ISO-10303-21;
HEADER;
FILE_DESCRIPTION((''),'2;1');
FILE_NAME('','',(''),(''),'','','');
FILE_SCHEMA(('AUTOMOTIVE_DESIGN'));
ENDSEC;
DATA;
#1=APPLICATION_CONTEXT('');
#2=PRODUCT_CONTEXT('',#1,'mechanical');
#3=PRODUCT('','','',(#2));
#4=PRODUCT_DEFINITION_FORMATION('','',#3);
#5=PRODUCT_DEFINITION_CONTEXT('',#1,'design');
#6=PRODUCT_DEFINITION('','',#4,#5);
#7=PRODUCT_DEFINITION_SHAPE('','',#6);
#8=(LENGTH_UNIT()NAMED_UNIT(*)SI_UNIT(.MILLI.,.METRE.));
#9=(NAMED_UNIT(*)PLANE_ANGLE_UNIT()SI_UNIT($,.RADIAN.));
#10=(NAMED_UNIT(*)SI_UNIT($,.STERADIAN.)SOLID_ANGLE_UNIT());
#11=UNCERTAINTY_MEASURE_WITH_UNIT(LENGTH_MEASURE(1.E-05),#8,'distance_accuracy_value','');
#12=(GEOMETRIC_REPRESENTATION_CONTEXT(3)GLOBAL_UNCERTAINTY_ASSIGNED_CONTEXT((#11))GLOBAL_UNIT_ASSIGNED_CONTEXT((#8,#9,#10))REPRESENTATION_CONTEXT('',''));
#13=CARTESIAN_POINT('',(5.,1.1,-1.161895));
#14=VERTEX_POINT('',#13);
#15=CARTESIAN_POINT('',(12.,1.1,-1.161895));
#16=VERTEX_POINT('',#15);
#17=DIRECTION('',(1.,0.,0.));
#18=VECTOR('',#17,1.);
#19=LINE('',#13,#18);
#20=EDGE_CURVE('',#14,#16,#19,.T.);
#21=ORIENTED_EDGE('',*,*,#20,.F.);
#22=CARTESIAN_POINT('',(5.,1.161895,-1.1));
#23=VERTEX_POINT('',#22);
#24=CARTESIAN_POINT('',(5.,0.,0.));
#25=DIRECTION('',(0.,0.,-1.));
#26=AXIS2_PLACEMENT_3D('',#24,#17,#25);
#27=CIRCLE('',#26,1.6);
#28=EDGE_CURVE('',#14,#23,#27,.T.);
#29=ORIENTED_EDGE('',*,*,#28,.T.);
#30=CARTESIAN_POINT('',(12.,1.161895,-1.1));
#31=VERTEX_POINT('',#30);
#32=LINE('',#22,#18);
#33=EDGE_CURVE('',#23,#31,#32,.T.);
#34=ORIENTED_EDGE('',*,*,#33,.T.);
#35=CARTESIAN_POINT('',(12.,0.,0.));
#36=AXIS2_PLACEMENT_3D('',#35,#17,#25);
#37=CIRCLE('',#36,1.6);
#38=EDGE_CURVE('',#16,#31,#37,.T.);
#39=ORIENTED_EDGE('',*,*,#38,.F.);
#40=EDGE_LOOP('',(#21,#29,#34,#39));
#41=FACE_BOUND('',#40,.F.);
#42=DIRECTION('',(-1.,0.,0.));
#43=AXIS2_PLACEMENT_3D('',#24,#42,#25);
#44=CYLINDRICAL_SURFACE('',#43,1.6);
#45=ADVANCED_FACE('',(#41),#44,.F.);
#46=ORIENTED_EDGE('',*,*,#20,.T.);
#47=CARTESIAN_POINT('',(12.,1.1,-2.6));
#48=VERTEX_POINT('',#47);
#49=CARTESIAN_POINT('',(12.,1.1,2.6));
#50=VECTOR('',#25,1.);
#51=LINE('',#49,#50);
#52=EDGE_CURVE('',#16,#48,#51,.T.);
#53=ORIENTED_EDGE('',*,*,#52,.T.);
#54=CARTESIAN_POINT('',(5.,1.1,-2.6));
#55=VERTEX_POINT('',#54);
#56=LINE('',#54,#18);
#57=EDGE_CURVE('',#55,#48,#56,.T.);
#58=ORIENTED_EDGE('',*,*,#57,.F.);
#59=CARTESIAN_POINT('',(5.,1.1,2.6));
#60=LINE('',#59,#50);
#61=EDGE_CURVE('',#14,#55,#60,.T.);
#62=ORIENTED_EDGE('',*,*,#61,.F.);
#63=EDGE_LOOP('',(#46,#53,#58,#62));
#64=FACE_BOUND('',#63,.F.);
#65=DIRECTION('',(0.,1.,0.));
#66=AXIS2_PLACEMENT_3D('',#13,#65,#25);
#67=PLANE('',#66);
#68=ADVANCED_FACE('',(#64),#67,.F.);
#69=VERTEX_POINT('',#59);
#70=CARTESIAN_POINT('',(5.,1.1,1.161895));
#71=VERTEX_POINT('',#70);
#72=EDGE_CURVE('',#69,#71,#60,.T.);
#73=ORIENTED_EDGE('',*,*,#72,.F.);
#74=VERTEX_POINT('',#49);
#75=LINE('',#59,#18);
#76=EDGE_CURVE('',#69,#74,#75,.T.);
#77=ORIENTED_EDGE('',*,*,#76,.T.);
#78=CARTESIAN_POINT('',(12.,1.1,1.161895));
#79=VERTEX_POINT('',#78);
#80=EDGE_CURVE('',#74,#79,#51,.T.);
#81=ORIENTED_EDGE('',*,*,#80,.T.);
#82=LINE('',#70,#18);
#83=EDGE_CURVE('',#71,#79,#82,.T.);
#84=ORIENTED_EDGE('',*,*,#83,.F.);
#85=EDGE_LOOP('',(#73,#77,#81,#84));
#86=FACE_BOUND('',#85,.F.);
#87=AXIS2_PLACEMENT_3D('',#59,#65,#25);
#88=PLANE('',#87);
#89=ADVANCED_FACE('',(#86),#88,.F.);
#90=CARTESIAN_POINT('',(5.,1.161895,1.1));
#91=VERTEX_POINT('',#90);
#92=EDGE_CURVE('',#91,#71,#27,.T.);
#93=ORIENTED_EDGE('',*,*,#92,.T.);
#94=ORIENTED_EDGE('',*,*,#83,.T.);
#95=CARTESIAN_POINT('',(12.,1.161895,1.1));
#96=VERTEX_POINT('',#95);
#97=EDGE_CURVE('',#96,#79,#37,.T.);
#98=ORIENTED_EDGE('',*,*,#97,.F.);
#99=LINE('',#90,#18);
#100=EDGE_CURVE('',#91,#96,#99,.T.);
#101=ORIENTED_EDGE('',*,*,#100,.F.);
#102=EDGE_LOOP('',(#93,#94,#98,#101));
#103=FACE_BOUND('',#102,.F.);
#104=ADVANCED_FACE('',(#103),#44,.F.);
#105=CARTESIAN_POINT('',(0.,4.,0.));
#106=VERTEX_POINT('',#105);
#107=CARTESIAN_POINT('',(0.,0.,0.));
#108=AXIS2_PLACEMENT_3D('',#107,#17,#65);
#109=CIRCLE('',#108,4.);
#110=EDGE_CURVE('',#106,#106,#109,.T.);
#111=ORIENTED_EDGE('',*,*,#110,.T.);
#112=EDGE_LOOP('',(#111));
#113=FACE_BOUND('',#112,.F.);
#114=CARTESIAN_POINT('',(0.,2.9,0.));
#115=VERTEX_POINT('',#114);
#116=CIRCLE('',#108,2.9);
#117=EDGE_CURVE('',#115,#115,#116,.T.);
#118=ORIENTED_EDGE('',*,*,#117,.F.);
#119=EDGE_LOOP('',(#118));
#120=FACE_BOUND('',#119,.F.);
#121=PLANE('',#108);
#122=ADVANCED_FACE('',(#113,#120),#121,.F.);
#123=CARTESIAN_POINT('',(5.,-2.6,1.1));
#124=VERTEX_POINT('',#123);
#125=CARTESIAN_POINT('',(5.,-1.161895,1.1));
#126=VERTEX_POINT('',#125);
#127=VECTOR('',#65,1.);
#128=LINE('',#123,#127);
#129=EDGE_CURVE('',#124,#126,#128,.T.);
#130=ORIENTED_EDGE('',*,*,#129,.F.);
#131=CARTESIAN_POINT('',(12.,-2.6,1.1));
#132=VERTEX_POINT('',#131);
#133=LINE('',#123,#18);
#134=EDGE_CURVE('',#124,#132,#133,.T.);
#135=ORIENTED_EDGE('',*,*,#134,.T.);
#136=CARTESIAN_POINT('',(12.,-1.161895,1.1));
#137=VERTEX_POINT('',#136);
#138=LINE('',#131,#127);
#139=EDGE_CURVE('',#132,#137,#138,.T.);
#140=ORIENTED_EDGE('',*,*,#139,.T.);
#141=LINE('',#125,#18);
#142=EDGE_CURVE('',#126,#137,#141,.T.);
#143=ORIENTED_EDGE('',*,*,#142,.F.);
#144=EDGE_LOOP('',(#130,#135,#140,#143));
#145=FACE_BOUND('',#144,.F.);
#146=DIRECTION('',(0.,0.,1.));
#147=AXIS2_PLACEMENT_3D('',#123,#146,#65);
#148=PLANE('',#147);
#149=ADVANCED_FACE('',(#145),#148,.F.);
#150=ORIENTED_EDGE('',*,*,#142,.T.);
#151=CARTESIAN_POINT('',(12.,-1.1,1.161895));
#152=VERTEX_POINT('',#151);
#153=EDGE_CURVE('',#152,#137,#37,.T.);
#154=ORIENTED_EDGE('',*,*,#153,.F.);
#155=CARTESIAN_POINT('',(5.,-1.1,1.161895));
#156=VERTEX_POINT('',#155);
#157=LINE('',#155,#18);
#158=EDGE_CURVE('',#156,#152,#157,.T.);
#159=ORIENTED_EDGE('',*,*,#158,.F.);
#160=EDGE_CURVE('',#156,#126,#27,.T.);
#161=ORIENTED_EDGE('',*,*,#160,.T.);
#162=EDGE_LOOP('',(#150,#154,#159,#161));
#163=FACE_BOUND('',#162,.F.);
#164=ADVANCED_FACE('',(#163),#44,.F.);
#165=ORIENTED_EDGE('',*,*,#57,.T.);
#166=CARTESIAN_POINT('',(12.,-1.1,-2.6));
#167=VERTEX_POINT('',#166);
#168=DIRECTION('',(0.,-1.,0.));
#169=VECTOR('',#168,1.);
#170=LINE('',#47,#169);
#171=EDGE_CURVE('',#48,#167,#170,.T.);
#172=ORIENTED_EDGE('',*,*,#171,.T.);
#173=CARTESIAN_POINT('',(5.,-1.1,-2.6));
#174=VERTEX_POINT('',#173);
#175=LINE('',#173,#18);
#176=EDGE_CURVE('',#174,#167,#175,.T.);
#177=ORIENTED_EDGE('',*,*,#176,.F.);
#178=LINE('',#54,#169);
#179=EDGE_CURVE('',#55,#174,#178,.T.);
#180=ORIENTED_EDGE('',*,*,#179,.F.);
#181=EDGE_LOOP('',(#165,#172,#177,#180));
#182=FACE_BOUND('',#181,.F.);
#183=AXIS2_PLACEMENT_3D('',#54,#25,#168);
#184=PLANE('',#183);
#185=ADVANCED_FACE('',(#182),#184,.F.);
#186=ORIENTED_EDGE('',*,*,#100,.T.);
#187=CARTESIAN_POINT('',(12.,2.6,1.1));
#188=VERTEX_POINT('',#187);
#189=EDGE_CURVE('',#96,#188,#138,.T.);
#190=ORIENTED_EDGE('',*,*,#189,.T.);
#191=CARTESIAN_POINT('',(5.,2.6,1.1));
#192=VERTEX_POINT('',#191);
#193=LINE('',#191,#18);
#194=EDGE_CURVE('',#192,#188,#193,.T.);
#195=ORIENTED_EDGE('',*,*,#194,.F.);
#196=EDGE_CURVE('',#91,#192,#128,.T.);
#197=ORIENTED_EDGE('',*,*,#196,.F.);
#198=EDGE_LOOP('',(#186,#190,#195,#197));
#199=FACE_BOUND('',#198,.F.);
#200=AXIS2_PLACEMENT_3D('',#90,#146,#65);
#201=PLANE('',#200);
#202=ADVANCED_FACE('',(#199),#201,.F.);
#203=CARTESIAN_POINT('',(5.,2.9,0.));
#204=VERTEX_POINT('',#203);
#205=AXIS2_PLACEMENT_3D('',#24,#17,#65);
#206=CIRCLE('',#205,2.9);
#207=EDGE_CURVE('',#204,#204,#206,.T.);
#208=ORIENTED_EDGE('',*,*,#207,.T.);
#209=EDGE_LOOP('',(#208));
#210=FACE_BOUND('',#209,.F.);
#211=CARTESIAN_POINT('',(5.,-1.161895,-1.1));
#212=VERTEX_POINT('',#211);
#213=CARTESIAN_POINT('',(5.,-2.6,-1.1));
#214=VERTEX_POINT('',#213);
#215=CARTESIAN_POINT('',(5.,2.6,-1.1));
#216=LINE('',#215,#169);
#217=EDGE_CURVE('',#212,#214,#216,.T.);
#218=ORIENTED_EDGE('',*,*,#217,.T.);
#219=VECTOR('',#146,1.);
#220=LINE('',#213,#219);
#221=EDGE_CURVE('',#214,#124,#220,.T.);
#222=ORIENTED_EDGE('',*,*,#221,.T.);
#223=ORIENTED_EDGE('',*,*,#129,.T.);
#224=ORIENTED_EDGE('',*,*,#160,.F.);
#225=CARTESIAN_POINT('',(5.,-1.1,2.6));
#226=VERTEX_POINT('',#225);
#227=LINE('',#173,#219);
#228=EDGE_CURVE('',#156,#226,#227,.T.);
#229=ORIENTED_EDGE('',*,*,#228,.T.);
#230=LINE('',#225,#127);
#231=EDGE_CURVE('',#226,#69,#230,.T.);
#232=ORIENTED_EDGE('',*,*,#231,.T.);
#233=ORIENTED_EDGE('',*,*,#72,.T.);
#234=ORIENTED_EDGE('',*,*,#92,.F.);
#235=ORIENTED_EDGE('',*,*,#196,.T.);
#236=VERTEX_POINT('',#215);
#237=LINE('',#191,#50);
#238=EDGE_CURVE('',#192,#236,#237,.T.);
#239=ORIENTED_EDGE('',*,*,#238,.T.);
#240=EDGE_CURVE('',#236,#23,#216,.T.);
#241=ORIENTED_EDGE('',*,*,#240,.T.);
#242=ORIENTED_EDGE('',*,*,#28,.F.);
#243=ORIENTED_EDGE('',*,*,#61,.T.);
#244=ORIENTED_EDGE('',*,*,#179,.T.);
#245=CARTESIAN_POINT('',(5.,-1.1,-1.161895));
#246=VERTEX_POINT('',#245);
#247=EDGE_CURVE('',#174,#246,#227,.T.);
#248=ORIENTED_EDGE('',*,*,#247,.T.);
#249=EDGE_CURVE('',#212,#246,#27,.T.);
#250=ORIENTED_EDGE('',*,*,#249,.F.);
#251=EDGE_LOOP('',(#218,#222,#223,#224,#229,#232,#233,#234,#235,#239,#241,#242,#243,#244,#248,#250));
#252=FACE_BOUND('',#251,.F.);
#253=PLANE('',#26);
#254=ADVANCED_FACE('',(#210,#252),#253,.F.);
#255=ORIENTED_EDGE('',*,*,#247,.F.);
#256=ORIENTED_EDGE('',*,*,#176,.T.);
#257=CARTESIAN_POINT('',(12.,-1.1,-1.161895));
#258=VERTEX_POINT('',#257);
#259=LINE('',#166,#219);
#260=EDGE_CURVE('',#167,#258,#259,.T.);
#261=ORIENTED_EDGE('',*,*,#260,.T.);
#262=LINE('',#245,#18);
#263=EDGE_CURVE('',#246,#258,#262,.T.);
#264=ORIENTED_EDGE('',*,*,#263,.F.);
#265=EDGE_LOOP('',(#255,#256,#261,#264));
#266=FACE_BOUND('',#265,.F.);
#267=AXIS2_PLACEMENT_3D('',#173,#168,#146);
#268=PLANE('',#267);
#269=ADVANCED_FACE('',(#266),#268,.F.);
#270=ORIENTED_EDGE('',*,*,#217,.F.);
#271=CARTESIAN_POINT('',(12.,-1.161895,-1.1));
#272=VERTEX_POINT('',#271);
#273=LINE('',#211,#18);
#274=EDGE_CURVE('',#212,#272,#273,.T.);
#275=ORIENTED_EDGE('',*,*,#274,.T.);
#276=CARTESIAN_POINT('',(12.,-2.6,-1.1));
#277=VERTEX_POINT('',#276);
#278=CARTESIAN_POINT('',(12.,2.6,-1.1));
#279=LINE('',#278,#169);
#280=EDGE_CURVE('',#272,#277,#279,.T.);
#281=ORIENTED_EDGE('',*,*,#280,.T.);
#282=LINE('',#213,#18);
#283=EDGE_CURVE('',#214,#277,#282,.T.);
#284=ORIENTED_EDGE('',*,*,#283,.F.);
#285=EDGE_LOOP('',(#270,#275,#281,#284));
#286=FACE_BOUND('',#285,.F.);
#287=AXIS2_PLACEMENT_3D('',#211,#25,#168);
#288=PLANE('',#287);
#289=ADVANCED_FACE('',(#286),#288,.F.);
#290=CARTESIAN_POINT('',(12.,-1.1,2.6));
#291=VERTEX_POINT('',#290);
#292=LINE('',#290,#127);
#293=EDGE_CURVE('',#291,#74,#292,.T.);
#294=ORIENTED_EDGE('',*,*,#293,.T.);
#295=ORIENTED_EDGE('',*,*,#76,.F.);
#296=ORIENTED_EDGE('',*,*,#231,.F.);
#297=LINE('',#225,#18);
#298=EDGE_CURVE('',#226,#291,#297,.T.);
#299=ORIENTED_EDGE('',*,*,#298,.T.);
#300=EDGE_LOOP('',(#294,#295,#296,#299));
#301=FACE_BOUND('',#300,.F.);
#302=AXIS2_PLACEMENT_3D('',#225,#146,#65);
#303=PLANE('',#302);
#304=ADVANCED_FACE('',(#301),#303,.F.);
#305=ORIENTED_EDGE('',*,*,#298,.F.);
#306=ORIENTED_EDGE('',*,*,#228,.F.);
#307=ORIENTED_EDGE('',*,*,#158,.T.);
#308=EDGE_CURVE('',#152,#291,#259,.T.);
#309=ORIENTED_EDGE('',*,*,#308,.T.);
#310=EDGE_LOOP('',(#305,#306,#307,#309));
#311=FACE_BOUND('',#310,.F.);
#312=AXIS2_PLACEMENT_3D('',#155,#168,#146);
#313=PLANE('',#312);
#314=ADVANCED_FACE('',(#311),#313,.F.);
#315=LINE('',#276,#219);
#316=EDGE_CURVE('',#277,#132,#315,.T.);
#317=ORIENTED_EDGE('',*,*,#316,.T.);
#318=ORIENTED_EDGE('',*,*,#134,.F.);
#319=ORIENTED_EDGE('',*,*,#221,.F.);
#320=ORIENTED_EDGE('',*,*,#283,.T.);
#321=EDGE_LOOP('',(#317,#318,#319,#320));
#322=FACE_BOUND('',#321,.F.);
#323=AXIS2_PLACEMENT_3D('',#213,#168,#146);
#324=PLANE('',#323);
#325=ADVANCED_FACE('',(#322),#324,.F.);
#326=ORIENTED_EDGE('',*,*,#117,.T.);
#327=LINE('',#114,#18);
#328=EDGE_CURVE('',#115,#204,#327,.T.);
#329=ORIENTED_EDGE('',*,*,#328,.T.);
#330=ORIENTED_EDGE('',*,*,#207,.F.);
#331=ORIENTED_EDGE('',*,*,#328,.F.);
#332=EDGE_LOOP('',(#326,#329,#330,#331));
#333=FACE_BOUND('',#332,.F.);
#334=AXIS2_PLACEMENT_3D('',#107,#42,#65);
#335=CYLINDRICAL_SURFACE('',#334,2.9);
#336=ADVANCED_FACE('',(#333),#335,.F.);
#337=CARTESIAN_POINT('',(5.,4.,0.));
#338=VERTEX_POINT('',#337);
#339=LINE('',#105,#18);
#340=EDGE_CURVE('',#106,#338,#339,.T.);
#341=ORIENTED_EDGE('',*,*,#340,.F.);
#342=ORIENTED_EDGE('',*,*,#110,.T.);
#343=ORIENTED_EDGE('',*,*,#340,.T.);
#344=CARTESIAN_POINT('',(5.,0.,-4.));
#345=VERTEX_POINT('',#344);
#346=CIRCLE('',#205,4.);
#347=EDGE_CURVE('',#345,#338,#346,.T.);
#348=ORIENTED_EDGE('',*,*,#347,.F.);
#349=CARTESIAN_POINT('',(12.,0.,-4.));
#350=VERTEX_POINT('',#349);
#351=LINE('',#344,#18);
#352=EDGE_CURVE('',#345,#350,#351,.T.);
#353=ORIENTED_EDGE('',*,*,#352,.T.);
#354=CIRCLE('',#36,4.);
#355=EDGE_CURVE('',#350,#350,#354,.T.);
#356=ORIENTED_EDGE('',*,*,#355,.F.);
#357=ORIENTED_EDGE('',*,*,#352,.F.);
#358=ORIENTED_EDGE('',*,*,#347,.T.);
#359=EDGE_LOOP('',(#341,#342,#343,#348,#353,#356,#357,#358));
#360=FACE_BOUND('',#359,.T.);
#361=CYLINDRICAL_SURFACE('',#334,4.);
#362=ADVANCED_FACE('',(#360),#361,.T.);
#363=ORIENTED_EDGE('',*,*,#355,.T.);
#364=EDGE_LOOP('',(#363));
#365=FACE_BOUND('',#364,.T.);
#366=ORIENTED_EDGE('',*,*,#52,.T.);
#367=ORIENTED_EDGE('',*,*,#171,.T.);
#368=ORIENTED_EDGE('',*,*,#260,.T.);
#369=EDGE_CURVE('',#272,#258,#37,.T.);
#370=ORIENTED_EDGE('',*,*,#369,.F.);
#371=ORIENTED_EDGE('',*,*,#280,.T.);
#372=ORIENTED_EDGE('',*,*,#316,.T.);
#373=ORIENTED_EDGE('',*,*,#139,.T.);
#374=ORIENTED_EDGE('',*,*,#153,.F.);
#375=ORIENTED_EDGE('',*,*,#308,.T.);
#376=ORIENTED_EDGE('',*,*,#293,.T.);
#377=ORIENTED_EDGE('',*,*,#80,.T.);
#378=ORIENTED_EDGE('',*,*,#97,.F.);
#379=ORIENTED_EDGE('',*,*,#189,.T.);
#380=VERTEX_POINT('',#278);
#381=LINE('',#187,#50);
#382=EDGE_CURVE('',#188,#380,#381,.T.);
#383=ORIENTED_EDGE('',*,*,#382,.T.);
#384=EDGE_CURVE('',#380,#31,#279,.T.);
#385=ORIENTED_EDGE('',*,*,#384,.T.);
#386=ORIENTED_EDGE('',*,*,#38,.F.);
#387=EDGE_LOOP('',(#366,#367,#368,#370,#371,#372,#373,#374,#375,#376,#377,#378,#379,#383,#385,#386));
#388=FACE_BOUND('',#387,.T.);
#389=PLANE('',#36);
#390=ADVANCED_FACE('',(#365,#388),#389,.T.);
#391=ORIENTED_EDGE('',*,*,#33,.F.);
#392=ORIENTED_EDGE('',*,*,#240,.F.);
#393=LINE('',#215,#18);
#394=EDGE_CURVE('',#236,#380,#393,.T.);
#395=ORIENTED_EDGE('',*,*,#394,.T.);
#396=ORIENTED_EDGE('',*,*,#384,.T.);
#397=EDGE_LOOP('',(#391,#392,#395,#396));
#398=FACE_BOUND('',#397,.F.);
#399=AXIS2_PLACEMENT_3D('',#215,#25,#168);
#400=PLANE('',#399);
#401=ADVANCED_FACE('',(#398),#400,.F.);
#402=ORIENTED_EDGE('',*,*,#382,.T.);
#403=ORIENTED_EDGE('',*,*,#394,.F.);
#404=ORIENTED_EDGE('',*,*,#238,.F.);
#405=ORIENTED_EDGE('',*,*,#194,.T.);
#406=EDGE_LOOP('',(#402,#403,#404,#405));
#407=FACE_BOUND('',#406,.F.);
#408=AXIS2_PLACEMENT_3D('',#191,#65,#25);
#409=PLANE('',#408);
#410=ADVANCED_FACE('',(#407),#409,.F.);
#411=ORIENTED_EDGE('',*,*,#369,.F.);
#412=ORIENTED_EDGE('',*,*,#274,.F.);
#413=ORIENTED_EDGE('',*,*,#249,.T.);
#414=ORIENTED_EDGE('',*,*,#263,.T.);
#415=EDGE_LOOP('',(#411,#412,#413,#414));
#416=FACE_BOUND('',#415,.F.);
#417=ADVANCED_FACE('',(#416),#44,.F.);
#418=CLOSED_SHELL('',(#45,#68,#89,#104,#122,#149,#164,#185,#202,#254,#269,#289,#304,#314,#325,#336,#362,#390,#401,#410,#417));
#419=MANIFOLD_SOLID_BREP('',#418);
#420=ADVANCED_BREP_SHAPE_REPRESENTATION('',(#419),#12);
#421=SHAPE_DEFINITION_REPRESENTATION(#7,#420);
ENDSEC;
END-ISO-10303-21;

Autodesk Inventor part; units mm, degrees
ref_plane "YZ Plane" through (0, 0, 0) normal (1, 0, 0) x (0, 1, 0)
ref_plane "XZ Plane" through (0, 0, 0) normal (0, 1, 0) x (-1, 0, 0)
ref_plane "XY Plane" through (0, 0, 0) normal (0, 0, 1) x (1, 0, 0)
sketch "Boceto1" plane through (0, 0, 0) normal (1, 0, 0) x (0, 1, 0)
  circle A0 centre (0, 0) radius 2.9
  line L0 (0, 5) -> (0, 5)
  line L1 (5, 0) -> (5, 0)
  line L2 (0, -5) -> (0, -5)
  line L3 (-5, 0) -> (-5, 0)
  circle A1 centre (0, 0) radius 4
  dimension "d0" = 5.8
  dimension "d11" = 8
extrude "Extrusión1" add sketch "Boceto1" along normal blind 5
sketch "Boceto2" plane through (5, 0, 0) normal (1, 0, 0) x (0, 0, -1)
  line L0 (1.1, -2.6) -> (-1.1, -2.6)
  line L1 (-1.1, -2.6) -> (-1.1, 2.6)
  line L2 (-1.1, 2.6) -> (1.1, 2.6)
  line L3 (1.1, 2.6) -> (1.1, -2.6)
  line L4 (1.1, -2.6) -> (-1.1, 2.6)
  line L5 (-1.1, -2.6) -> (1.1, 2.6)
  line L6 (2.6, -1.1) -> (-2.6, -1.1)
  line L7 (-2.6, -1.1) -> (-2.6, 1.1)
  line L8 (-2.6, 1.1) -> (2.6, 1.1)
  line L9 (2.6, 1.1) -> (2.6, -1.1)
  line L10 (2.6, -1.1) -> (-2.6, 1.1)
  line L11 (-2.6, -1.1) -> (2.6, 1.1)
  circle A0 centre (0, 0) radius 1.6
  circle A1 centre (0, 0) radius 4 projected
  circle A2 centre (0, 0) radius 4
  point P0 (-1.1, -1.1619)
  point P1 (-1.1619, -1.1)
  point P2 (-1.1619, 1.1)
  point P3 (-1.1, 1.1619)
  point P4 (1.1, 1.1619)
  point P5 (1.1619, 1.1)
  point P6 (1.1619, -1.1)
  point P7 (1.1, -1.1619)
  dimension "d6" = 2.2
  dimension "d7" = 5.2
  dimension "d8" = 3.2
extrude "Extrusión2" add sketch "Boceto2" along normal blind 7
properties part number "AcopleMotor"
